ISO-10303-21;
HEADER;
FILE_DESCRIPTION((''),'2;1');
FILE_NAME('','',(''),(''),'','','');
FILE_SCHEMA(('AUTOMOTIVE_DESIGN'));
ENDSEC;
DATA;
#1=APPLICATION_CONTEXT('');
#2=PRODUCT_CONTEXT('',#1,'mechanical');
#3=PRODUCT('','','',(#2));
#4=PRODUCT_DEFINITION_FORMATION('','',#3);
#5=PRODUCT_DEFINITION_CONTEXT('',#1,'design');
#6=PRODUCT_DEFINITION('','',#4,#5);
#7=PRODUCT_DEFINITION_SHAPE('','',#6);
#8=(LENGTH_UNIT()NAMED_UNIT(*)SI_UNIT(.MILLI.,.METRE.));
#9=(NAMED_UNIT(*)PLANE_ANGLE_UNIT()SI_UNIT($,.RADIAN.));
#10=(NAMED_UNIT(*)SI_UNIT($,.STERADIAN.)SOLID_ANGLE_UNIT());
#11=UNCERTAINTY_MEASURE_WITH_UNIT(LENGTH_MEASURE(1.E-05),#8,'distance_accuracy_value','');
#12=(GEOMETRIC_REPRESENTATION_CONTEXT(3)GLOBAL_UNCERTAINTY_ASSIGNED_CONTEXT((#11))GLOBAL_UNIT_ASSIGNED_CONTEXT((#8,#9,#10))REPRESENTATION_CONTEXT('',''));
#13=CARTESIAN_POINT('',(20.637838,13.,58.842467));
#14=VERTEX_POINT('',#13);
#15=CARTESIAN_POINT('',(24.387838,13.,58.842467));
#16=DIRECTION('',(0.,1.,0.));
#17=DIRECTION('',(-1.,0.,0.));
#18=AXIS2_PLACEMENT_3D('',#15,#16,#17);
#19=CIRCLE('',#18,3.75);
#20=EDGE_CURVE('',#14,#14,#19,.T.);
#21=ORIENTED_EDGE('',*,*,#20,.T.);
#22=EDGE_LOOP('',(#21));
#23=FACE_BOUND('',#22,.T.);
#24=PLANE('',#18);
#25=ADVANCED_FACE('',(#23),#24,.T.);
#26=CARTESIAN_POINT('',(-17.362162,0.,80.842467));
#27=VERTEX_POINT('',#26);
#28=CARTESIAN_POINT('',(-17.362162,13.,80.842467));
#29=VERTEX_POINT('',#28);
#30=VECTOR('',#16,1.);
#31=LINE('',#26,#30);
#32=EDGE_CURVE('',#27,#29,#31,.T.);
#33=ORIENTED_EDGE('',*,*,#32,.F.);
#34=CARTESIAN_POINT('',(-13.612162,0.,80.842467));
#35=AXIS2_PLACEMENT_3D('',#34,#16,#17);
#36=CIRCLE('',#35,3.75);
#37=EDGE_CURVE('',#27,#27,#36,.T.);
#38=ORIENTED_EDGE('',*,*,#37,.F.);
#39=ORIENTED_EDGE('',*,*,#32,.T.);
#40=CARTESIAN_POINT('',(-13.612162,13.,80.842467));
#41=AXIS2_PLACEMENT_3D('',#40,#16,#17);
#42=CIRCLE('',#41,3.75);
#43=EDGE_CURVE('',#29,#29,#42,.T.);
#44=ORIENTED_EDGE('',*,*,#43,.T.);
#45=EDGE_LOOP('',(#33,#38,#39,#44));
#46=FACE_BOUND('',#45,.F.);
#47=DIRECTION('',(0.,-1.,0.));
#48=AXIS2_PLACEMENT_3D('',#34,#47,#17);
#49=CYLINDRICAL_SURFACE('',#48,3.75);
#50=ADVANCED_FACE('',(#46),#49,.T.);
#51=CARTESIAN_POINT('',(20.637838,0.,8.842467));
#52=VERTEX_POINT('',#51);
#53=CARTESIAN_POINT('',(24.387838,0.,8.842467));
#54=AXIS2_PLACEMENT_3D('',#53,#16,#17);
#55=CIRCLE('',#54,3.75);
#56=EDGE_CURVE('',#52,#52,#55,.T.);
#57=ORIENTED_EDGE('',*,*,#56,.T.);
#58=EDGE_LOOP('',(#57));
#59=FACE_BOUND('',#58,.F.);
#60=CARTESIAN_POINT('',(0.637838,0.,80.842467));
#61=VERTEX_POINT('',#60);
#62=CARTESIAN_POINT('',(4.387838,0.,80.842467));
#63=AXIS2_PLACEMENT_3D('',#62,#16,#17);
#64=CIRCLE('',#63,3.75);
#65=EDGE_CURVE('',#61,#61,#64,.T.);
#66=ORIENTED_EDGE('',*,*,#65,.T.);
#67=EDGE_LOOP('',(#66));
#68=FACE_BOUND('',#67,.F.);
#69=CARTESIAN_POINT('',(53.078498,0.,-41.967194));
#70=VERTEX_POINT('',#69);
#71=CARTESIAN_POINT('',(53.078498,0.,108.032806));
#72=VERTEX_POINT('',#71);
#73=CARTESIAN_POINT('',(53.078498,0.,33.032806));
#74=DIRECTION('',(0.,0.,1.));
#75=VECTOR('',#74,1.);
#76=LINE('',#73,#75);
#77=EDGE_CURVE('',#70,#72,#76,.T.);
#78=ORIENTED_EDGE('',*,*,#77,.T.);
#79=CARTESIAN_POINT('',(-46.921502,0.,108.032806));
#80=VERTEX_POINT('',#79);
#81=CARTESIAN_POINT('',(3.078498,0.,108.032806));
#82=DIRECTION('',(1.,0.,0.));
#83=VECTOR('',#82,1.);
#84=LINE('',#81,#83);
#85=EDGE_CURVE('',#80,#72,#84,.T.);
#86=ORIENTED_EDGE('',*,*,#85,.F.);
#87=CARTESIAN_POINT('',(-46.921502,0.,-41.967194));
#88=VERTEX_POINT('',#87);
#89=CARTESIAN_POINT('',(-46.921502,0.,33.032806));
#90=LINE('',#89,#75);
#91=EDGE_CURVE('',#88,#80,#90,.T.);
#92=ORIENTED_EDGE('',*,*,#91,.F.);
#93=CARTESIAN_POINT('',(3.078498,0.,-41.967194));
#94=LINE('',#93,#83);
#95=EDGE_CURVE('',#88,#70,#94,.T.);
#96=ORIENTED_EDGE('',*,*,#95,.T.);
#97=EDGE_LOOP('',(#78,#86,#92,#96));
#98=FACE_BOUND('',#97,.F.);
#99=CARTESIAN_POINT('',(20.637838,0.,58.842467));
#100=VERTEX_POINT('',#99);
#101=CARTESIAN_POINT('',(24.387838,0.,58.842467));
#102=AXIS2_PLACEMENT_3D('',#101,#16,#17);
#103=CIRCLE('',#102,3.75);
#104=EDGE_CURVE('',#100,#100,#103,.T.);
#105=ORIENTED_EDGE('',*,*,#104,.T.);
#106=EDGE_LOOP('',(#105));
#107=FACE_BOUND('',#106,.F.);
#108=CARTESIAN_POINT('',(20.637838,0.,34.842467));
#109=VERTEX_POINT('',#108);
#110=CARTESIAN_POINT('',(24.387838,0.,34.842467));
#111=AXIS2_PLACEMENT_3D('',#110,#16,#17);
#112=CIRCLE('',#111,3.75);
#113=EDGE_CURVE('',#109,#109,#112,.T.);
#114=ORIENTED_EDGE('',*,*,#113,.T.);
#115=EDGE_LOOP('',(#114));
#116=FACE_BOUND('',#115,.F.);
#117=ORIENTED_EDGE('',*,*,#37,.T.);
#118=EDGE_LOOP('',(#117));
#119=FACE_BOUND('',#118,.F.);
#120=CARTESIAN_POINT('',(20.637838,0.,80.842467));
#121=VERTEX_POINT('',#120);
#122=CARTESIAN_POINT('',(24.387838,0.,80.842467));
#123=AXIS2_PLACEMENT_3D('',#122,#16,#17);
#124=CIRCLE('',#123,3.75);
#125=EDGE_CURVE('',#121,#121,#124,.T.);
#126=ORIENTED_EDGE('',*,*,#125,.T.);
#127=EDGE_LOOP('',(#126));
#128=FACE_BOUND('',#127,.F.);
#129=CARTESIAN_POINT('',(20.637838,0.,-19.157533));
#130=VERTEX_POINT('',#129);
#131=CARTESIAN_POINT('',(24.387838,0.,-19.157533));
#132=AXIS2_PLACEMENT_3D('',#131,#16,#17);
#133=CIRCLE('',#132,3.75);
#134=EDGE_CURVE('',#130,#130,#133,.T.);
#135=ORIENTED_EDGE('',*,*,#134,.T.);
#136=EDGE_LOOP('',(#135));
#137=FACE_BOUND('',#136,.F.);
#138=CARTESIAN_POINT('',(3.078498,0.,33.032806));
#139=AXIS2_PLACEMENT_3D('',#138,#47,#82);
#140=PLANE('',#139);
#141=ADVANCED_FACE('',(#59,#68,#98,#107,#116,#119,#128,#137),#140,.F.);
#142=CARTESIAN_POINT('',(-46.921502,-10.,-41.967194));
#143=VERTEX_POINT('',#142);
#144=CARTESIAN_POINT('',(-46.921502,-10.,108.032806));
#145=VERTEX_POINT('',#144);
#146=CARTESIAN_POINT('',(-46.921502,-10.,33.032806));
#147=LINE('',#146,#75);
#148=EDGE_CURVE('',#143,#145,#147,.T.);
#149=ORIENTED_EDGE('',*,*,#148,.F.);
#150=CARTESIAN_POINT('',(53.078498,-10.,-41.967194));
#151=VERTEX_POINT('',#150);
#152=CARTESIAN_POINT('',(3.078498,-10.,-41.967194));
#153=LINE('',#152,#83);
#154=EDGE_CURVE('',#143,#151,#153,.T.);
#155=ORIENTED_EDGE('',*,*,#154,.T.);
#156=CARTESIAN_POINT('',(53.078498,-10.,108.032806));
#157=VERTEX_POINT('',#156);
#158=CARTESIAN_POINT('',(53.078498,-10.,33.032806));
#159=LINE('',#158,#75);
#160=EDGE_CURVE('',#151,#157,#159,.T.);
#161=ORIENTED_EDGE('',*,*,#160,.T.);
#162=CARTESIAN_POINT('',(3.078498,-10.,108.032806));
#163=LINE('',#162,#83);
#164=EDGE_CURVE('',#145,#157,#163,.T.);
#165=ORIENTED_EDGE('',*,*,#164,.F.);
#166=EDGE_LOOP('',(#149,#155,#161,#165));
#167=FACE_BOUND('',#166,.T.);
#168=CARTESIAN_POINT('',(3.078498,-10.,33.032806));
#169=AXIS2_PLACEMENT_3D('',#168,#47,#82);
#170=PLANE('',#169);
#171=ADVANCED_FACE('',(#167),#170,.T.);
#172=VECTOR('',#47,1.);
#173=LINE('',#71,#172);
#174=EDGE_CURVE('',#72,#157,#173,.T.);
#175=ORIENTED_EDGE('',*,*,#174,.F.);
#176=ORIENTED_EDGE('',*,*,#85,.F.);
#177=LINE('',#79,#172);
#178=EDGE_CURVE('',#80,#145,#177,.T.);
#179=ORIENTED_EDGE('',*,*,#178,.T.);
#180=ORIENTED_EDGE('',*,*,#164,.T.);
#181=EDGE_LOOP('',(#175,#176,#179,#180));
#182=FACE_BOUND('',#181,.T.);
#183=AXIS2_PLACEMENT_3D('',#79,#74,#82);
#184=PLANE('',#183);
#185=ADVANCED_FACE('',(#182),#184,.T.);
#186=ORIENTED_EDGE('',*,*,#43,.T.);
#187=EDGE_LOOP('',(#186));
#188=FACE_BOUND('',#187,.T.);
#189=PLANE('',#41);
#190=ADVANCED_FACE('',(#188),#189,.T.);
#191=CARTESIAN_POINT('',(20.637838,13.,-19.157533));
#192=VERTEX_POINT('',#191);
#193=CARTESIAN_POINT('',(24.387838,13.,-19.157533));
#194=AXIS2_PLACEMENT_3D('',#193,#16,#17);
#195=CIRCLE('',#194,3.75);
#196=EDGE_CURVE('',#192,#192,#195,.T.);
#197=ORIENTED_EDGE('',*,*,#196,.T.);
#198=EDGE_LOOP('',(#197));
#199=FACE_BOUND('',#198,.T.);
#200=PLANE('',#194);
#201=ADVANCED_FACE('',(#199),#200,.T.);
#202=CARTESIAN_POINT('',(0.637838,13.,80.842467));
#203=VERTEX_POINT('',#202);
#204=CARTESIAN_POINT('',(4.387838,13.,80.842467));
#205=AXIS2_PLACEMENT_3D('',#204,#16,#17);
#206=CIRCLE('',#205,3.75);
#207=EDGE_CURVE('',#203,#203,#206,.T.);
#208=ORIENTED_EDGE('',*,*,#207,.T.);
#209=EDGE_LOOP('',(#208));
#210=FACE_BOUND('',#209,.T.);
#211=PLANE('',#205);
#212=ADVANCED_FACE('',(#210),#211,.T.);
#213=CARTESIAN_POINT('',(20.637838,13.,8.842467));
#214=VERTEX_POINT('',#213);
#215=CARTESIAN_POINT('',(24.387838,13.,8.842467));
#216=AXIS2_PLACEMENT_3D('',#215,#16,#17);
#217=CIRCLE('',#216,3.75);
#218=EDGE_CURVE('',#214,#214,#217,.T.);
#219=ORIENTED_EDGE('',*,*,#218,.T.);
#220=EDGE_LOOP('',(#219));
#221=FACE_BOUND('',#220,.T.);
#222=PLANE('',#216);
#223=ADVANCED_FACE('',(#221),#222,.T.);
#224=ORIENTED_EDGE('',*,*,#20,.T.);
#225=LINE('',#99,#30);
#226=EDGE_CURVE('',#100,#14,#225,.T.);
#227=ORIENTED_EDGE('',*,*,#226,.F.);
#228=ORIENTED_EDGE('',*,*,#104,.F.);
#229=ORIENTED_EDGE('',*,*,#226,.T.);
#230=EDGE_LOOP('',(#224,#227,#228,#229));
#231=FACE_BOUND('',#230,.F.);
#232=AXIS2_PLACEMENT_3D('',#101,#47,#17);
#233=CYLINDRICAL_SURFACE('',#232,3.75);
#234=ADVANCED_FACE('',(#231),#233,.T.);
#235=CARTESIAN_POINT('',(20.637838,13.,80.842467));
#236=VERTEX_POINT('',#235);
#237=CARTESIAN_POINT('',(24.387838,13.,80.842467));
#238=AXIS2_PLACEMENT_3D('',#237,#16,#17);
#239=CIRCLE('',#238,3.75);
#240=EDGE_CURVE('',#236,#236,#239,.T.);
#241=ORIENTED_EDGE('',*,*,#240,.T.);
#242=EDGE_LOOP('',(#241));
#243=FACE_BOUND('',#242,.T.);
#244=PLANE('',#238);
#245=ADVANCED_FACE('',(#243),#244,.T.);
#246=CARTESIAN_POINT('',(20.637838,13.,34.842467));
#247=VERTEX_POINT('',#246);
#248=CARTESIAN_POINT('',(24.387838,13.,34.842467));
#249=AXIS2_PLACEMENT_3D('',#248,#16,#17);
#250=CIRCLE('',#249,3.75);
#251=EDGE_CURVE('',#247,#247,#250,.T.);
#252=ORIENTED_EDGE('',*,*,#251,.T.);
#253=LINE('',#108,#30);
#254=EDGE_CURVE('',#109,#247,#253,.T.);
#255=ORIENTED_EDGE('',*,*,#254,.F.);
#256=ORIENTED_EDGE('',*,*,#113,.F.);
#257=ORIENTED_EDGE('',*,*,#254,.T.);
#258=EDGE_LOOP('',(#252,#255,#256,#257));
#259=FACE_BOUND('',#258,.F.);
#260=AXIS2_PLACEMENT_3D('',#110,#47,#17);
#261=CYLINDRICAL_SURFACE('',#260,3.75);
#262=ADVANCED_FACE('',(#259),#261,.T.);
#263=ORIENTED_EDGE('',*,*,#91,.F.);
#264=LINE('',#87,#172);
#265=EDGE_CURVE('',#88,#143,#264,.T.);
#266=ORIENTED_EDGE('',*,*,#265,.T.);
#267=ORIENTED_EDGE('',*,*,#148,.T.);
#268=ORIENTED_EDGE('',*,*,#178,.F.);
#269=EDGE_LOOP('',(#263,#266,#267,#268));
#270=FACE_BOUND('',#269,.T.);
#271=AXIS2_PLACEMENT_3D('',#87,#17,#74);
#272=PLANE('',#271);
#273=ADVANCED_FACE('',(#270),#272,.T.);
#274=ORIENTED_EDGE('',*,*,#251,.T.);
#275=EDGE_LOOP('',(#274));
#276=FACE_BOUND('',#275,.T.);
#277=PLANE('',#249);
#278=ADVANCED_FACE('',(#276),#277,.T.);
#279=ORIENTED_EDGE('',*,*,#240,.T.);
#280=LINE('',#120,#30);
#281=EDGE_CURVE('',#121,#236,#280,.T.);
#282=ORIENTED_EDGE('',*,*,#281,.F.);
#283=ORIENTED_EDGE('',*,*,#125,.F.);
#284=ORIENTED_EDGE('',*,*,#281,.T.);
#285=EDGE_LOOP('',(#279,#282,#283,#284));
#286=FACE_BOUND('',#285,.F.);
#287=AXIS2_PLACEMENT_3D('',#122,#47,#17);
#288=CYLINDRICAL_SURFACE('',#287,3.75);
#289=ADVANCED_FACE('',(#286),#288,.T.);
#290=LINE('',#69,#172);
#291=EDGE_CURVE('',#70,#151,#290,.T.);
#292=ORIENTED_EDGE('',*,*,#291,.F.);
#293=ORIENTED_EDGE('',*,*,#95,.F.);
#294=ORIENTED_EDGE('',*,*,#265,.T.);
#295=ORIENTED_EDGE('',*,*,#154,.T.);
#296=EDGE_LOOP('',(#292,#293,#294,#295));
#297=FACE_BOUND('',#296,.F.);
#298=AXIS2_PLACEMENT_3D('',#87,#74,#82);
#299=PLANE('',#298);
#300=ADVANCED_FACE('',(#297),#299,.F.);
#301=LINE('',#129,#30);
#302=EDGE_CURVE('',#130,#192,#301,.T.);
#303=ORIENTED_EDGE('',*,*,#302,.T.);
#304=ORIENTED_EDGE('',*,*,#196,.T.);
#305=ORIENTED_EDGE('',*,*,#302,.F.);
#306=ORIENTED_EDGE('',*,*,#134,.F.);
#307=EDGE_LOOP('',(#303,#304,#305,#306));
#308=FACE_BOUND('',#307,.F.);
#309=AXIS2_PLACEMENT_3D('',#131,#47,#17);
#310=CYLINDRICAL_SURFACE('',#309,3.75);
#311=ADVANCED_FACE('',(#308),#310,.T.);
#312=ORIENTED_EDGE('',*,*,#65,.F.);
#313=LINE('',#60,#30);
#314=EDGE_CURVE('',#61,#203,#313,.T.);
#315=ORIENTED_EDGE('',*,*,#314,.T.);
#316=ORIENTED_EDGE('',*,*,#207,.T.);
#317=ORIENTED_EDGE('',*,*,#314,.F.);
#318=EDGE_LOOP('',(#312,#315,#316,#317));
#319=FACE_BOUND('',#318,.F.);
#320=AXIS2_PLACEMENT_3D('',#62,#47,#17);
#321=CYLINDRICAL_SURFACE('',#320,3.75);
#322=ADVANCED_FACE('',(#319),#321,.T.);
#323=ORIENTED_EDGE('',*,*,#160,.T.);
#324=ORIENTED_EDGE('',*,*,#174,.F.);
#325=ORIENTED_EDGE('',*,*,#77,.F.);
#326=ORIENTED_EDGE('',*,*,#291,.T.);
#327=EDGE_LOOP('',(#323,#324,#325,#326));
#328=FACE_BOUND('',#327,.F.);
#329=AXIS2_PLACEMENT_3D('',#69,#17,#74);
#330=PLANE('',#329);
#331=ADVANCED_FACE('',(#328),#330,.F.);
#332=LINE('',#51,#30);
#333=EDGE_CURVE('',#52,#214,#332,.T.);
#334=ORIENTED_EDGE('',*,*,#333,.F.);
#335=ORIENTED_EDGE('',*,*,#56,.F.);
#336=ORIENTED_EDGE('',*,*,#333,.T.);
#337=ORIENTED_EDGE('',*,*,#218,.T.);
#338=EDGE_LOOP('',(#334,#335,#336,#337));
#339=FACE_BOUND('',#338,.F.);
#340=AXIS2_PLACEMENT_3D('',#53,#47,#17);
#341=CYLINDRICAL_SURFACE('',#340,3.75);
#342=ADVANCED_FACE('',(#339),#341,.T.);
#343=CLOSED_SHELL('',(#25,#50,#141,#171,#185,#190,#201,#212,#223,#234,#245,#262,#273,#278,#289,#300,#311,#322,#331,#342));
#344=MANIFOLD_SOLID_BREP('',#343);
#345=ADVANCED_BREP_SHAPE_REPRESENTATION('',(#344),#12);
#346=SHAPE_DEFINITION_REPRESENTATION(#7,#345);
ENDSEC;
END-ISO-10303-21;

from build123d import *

# Parameters (mm, degrees)
F0_W     = 100
F0_H     = 150
F1_DEPTH = 10
F2_R     = 3.75
F3_DEPTH = 13


# Not quite as in the source:
# - a feature names something its author has since deleted; it is built from what else it names


with BuildPart() as f1:
    # F0 (on Front) → F1 (new body)
    with BuildSketch(Plane.XZ):
        with Locations((3.0784979463, 33.0328063236)):
            Rectangle(F0_W, F0_H)
    extrude(amount=F1_DEPTH)

    # F2 (on face) → F3 (join)
    with BuildSketch(Plane(origin=(0, 0, 0), x_dir=(-1, 0, 0), z_dir=(0, 1, 0))):
        with Locations((13.6121616811, 80.8424673975)):
            Circle(F2_R)
        with Locations((-4.3878383189, 80.8424673975)):
            Circle(F2_R)
        with Locations((-24.3878383189, 80.8424673975)):
            Circle(F2_R)
        with Locations((-24.3878383189, 58.8424673975)):
            Circle(F2_R)
        with Locations((-24.3878383189, 34.8424673975)):
            Circle(F2_R)
        with Locations((-24.3878383189, 8.8424673975)):
            Circle(F2_R)
        with Locations((-24.3878383189, -19.1575326025)):
            Circle(F2_R)
    extrude(amount=F3_DEPTH)


solid = f1.part
